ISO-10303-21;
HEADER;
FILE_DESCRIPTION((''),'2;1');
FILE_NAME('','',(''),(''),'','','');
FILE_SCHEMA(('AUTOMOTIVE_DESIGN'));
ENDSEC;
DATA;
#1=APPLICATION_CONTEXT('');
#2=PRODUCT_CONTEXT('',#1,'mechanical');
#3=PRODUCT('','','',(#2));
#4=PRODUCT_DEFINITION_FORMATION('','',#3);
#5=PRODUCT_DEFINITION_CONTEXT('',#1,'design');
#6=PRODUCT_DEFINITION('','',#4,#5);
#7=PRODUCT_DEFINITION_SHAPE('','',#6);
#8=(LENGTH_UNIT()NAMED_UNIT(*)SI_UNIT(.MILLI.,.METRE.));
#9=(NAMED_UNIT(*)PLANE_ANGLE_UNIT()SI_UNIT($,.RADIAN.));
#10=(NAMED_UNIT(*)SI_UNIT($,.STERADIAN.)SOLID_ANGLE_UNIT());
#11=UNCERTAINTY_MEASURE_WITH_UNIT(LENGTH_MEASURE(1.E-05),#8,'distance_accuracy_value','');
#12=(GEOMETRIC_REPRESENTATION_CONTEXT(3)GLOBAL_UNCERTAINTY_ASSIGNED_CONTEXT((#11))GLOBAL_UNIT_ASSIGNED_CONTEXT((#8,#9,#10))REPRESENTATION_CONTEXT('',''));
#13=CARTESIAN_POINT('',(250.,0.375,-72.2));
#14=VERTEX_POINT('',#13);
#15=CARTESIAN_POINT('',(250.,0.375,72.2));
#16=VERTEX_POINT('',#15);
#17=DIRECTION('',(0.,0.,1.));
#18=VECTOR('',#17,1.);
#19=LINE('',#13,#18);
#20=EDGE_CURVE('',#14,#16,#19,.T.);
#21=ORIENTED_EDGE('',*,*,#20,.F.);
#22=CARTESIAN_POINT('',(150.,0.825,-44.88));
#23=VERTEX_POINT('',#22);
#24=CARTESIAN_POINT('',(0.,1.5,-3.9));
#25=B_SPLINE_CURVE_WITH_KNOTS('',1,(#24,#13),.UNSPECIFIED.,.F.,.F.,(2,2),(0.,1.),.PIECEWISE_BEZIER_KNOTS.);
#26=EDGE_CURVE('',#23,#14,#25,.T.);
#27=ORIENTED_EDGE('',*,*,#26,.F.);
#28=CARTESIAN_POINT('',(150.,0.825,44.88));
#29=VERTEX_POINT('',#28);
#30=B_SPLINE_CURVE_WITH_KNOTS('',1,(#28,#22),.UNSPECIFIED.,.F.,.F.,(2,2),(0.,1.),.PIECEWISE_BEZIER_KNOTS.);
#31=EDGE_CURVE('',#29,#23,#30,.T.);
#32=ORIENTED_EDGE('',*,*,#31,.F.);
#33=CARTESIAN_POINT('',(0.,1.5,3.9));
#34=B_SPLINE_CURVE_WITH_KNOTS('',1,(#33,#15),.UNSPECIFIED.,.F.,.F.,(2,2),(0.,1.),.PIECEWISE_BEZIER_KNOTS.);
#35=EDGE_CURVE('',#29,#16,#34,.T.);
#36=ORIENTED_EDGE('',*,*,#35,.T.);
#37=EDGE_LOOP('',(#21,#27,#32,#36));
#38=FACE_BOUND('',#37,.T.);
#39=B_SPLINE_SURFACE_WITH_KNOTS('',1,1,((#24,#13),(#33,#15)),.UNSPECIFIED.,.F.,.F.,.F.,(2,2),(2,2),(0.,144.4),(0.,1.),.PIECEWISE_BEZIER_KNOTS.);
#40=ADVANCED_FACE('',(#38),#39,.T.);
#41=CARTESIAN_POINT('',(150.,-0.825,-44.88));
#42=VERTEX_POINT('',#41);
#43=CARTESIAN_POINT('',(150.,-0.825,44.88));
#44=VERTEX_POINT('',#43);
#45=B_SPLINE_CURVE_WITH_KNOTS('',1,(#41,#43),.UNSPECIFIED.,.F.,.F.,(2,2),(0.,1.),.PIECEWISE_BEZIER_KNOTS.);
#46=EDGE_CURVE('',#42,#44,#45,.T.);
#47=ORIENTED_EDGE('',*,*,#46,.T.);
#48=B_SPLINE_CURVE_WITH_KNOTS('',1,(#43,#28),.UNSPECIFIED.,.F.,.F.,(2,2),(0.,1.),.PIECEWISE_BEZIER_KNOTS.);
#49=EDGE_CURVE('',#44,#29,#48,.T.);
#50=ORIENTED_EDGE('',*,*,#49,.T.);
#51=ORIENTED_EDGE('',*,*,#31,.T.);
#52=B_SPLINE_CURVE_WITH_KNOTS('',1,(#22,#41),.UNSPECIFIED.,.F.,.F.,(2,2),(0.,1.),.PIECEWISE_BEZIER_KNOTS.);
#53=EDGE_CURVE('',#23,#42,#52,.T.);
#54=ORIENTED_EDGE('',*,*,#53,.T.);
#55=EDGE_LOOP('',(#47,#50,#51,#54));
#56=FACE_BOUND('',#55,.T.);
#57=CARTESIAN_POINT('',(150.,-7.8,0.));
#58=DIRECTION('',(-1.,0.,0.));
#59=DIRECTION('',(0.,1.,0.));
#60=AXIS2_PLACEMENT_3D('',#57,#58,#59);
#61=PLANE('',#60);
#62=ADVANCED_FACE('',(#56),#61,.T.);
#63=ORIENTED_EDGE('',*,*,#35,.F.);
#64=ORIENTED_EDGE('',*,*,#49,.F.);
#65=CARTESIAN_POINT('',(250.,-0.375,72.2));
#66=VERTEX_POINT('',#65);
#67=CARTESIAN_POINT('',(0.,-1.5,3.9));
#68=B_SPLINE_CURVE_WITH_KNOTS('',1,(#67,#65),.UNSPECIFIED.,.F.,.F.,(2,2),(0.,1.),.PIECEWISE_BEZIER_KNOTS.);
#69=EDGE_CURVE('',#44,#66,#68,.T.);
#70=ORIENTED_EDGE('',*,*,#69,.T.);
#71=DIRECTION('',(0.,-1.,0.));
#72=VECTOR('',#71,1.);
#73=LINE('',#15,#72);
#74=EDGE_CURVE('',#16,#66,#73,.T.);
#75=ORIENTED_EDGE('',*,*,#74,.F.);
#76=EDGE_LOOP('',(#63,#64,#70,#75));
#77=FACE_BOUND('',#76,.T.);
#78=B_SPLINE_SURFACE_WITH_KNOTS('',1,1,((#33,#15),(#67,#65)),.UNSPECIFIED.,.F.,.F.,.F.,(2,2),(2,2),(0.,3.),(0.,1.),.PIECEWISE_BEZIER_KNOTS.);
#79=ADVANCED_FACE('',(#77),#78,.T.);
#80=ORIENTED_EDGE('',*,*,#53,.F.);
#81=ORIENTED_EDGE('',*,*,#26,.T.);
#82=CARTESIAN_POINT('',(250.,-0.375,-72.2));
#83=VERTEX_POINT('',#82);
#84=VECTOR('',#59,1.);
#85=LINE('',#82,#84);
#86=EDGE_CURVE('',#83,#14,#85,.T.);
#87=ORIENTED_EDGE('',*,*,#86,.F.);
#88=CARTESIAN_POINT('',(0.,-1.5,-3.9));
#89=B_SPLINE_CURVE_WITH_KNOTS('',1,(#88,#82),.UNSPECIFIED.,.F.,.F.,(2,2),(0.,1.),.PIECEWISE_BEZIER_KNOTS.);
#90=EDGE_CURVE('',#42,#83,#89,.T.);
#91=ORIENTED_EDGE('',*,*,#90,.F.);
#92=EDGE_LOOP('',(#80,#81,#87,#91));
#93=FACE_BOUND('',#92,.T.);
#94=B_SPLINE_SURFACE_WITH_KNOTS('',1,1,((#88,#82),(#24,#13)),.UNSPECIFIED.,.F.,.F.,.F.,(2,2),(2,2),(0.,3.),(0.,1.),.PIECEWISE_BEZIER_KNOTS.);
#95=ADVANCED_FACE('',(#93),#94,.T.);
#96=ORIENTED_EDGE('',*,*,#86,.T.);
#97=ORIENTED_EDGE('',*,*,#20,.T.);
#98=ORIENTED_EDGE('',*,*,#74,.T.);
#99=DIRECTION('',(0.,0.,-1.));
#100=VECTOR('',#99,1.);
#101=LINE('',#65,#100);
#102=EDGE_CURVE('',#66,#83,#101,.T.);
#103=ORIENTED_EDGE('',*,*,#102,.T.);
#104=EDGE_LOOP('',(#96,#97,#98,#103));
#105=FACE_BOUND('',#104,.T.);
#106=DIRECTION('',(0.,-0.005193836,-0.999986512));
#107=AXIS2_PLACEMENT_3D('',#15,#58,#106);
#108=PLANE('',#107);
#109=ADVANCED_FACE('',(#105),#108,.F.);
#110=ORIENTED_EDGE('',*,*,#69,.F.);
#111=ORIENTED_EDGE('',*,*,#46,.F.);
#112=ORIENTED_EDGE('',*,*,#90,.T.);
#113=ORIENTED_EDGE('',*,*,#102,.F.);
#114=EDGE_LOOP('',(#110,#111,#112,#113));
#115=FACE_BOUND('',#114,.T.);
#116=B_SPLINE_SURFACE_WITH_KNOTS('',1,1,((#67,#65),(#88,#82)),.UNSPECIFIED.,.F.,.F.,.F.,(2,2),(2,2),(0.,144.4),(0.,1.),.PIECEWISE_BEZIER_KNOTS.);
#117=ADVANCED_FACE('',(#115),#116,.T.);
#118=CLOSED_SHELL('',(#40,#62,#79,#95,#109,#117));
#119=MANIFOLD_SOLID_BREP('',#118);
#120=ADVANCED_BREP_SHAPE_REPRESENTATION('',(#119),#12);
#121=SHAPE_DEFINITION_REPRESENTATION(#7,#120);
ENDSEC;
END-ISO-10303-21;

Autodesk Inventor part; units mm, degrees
sketch "Sketch_2" plane through (0, 0, 0) normal (1, 0, 0) x (0, 1, 0)
  line L0 (-1.5, 3.9) -> (-1.5, -3.9)
  line L1 (-1.5, -3.9) -> (1.5, -3.9)
  line L2 (1.5, -3.9) -> (1.5, 3.9)
  line L3 (1.5, 3.9) -> (-1.5, 3.9)
sketch "Sketch_3" plane through (250, 0, 0) normal (1, 0, 0) x (0, 0, -1)
  line L0 (-72.2, -0.375) -> (72.2, -0.375)
  line L1 (72.2, -0.375) -> (72.2, 0.375)
  line L2 (72.2, 0.375) -> (-72.2, 0.375)
  line L3 (-72.2, 0.375) -> (-72.2, -0.375)
loft "Loft1" add profiles "Sketch_2", "Sketch_3"
sketch "Sketch_4" plane through (0, 0, 0) normal (0, 0, 1) x (1, 0, 0)
  line L0 (0, 7.8) -> (0, -7.8)
  line L1 (0, -7.8) -> (150, -7.8)
  line L2 (150, -7.8) -> (150, 7.8)
  line L3 (150, 7.8) -> (0, 7.8)
extrude "Extrusion1" cut sketch "Sketch_4" along normal mid plane 288.8
ref_plane "CP1_XY" through (0, 0, 0) normal (0, 0, 1) x (1, 0, 0)
ref_plane "CP1_YZ" through (0, 0, 0) normal (1, 0, 0) x (0, 1, 0)
ref_plane "CP1_ZX" through (0, 0, 0) normal (0, 1, 0) x (0, 0, 1)
properties part number "Measuringrange_OXS200_11728845"
